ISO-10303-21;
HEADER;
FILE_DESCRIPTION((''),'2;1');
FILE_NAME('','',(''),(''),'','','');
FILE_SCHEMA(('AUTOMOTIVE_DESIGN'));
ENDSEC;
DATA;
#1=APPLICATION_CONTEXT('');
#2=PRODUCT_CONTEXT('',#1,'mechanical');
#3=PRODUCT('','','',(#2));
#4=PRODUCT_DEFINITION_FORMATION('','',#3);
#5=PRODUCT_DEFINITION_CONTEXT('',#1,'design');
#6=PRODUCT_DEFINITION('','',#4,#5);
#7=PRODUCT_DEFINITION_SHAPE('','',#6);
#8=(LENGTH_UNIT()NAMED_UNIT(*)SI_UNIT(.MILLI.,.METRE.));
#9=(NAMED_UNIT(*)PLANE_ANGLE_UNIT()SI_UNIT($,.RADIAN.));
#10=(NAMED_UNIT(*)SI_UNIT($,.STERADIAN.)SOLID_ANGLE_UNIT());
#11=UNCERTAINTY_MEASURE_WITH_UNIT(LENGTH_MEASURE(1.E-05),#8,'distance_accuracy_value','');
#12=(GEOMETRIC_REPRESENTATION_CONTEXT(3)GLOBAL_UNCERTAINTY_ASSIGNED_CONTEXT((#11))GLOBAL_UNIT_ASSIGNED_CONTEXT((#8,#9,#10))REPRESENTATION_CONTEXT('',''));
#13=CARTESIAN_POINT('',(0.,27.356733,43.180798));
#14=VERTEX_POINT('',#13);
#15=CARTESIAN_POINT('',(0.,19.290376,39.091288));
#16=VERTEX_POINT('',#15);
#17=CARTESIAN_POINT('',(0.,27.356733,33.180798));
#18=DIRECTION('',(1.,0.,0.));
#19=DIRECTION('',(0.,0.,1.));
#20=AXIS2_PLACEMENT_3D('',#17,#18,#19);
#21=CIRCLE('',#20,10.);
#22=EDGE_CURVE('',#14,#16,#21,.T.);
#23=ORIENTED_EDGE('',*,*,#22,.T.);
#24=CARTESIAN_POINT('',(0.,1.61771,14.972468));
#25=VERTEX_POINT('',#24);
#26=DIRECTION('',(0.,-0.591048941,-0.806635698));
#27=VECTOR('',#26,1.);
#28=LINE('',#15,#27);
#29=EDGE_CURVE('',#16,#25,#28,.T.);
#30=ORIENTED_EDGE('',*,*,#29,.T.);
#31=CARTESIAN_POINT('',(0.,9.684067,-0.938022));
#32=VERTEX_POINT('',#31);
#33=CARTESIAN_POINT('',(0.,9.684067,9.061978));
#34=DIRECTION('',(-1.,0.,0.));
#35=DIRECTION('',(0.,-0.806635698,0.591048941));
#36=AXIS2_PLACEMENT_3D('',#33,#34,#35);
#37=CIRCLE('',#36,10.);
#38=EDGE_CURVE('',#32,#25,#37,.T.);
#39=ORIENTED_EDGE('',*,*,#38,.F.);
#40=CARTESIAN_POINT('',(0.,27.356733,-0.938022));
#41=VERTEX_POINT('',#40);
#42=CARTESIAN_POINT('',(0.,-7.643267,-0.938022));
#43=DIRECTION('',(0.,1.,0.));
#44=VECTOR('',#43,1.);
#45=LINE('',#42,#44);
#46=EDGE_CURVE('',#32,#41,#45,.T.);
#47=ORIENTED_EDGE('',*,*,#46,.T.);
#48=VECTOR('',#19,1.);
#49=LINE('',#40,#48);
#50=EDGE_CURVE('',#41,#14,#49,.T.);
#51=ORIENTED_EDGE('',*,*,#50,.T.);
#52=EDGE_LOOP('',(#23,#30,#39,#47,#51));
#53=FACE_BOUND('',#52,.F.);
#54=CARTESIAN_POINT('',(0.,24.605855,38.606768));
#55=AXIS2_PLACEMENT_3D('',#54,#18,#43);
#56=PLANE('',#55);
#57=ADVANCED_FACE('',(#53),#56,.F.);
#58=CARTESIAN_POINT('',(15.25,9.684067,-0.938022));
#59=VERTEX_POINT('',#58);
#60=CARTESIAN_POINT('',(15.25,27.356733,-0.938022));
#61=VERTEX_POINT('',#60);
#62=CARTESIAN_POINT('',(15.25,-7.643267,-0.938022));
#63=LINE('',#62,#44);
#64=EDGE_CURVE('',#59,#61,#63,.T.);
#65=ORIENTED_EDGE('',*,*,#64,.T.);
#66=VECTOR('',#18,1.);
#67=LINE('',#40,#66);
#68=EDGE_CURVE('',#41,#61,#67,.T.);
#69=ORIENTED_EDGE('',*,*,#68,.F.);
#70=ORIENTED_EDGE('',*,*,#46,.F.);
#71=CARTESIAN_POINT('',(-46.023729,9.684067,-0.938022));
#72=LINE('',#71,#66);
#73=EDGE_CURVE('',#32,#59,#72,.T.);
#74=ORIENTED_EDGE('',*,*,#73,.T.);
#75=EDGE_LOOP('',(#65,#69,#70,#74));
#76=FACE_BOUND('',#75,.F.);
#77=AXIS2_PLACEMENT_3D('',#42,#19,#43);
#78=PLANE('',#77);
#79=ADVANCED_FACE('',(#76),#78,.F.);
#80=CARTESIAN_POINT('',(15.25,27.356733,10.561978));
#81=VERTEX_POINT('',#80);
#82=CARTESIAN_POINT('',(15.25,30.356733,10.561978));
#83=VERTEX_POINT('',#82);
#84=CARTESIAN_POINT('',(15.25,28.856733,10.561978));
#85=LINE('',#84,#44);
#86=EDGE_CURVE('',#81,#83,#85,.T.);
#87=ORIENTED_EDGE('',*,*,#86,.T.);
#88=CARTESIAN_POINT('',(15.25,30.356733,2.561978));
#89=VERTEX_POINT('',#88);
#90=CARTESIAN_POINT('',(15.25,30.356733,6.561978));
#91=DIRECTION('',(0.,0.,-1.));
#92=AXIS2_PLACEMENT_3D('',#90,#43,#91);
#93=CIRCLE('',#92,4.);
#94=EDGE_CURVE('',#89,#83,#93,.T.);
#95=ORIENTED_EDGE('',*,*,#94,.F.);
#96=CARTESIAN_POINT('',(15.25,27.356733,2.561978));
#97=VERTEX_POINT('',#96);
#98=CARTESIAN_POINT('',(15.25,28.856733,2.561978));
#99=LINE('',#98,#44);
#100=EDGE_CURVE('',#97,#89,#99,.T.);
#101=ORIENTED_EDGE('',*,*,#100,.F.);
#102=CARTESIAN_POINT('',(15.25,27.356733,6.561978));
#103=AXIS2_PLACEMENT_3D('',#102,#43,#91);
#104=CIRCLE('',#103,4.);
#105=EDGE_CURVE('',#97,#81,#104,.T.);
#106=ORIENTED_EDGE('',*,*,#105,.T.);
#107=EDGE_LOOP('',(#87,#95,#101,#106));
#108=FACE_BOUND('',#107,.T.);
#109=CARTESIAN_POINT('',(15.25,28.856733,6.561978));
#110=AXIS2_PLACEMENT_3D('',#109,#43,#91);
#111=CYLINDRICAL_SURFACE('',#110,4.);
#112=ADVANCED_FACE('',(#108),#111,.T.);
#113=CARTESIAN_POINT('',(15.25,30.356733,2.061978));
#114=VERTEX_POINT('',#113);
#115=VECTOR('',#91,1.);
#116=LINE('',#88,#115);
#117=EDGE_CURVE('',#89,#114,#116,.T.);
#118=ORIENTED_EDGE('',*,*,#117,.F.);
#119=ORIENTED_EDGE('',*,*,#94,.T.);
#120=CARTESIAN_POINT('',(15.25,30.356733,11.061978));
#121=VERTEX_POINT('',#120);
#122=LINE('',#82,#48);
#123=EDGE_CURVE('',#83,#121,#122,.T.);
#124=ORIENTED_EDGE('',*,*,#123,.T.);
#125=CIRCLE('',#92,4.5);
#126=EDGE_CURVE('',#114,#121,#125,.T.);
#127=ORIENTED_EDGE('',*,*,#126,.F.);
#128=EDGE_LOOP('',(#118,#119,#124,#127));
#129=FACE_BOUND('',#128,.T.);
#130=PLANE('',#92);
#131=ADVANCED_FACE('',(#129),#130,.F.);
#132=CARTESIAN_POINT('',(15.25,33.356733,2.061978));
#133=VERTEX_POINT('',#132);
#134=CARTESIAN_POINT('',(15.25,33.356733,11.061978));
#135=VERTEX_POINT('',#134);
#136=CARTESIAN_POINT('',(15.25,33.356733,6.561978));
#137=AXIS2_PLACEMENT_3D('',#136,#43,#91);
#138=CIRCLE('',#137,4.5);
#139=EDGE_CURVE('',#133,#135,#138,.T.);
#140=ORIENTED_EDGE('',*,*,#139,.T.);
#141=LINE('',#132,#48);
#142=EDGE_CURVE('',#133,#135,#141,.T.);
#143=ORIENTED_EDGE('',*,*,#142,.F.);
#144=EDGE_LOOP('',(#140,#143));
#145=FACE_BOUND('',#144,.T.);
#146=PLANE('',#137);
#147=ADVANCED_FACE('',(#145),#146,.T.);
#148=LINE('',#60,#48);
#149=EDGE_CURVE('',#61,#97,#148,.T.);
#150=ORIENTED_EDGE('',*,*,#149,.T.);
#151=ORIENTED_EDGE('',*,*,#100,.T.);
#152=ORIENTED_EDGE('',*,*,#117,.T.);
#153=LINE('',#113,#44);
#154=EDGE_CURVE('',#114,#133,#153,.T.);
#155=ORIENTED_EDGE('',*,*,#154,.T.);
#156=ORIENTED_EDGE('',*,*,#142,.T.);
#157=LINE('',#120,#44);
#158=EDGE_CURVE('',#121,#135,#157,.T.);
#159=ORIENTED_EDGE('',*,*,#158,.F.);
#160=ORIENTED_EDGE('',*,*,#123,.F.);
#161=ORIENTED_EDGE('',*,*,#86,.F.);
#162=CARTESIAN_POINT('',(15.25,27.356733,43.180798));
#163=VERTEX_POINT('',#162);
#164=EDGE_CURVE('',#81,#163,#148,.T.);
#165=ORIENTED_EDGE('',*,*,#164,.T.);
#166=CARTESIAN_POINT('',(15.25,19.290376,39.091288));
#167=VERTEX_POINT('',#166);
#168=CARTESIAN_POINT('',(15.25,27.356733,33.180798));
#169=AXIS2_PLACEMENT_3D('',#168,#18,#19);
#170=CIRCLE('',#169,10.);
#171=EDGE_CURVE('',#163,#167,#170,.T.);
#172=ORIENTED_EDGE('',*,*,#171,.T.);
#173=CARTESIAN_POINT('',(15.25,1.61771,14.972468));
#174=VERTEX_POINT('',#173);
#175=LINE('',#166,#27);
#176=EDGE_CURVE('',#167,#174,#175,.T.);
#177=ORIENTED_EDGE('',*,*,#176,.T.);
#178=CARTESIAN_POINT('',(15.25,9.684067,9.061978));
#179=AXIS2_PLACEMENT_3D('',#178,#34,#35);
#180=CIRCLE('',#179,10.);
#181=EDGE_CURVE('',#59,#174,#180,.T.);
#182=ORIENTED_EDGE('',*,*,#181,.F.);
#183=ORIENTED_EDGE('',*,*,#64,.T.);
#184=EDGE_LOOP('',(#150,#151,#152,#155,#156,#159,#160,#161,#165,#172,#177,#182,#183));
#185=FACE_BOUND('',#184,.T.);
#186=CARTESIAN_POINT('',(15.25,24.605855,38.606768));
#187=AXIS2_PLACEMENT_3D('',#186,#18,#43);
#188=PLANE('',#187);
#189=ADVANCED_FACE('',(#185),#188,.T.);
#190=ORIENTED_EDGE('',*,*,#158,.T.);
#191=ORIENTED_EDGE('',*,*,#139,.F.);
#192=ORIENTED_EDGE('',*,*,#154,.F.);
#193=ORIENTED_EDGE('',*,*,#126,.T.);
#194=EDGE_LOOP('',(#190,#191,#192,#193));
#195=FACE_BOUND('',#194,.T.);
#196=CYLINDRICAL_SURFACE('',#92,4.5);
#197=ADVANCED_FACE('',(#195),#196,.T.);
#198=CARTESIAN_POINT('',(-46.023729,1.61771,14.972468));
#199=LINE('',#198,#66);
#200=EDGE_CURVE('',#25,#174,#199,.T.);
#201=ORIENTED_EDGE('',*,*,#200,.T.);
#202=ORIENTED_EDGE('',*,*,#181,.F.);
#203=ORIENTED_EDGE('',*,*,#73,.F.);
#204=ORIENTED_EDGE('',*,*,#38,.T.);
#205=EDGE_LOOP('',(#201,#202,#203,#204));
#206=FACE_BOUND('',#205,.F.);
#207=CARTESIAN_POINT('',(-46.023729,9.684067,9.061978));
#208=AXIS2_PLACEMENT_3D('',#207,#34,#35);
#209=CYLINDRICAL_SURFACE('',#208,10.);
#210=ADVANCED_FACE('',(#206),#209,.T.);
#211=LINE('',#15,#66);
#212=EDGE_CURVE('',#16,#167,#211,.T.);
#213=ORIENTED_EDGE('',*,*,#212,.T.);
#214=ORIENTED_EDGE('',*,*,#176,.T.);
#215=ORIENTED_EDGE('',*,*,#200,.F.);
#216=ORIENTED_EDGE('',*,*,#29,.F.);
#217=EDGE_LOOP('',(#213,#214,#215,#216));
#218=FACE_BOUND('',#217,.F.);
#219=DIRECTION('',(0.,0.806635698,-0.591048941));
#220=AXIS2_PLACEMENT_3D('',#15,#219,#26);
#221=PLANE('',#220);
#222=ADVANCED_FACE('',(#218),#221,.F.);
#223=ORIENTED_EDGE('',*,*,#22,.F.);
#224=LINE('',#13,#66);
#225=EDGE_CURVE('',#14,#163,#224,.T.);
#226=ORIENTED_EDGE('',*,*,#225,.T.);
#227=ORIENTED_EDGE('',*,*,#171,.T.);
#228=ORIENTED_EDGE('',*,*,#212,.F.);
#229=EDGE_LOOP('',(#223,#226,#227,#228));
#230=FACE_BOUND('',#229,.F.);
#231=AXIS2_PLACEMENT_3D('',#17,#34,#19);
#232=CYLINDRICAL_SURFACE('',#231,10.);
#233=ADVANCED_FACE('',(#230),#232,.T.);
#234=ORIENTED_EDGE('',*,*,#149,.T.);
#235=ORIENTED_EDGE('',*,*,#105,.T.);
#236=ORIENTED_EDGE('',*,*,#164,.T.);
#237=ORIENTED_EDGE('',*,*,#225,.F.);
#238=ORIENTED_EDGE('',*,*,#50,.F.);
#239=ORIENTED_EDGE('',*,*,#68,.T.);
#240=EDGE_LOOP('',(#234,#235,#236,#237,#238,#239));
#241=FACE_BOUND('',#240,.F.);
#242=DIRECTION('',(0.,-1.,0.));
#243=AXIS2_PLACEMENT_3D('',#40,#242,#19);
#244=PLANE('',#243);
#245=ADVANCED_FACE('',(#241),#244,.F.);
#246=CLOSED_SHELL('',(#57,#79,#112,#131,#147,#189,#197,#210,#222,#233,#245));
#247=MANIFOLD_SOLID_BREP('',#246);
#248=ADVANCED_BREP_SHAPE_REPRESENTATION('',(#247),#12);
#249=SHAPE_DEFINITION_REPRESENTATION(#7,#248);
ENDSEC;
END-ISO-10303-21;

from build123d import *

# Parameters (mm, degrees)
F1_DEPTH    = 15.25
F2_T1_DEPTH = 107.2974570989
F3_W        = 3
F3_H        = 4
F4_ANGLE    = 180


# Not quite as in the source:
# - a fillet or chamfer that OpenCascade refuses, or shapes differently, is made with other operations: its cross-section is extruded or revolved along the edge and cut away or added


with BuildPart() as f1:
    # F0 (on Right) → F1 (new body)
    with BuildSketch(Plane.YZ):
        with BuildLine():
            Line((27.3567325823, 33.1807983013), (27.3567325823, 43.1807983013))
            ThreePointArc((27.3567325823, 43.1807983013), (22.8348355324, 42.1000161521), (19.2903756049, 39.0912877154))
            Line((19.2903756049, 39.0912877154), (27.3567325823, 33.1807983013))
        make_face()
        with BuildLine():
            Line((27.3567325823, 23.1807983013), (27.3567325823, 33.1807983013))
            Line((27.3567325823, 33.1807983013), (21.4462431681, 25.1144413239))
            ThreePointArc((21.4462431681, 25.1144413239), (24.2473572248, 23.6764948083), (27.3567325823, 23.1807983013))
        make_face()
        with BuildLine():
            Line((21.4462431681, 25.1144413239), (27.3567325823, 33.1807983013))
            Line((27.3567325823, 33.1807983013), (19.2903756049, 39.0912877154))
            ThreePointArc((19.2903756049, 39.0912877154), (17.4736097193, 31.656369728), (21.4462431681, 25.1144413239))
        make_face()
        with BuildLine():
            ThreePointArc((21.4462431681, 25.1144413239), (17.4736097193, 31.656369728), (19.2903756049, 39.0912877154))
            Line((19.2903756049, 39.0912877154), (-5.7096243951, 4.9724677154))
            ThreePointArc((-5.7096243951, 4.9724677154), (0.832304009, 8.9451011642), (8.2672219964, 7.1283352786))
            Line((8.2672219964, 7.1283352786), (21.4462431681, 25.1144413239))
        make_face()
        with BuildLine():
            ThreePointArc((-5.7096243951, 4.9724677154), (-7.1475709107, 2.1713536587), (-7.6432674177, -0.9380216987))
            Line((-7.6432674177, -0.9380216987), (2.3567325823, -0.9380216987))
            Line((2.3567325823, -0.9380216987), (-5.7096243951, 4.9724677154))
        make_face()
        with BuildLine():
            Line((27.3567325823, -0.9380216987), (27.3567325823, 23.1807983013))
            ThreePointArc((27.3567325823, 23.1807983013), (24.2473572248, 23.6764948083), (21.4462431681, 25.1144413239))
            Line((21.4462431681, 25.1144413239), (8.2672219964, 7.1283352786))
            ThreePointArc((8.2672219964, 7.1283352786), (11.2759504331, 3.5838753511), (12.3567325823, -0.9380216987))
            Line((12.3567325823, -0.9380216987), (27.3567325823, -0.9380216987))
        make_face()
        with BuildLine():
            ThreePointArc((8.2672219964, 7.1283352786), (0.832304009, 8.9451011642), (-5.7096243951, 4.9724677154))
            Line((-5.7096243951, 4.9724677154), (2.3567325823, -0.9380216987))
            Line((2.3567325823, -0.9380216987), (8.2672219964, 7.1283352786))
        make_face()
        with BuildLine():
            Line((8.2672219964, 7.1283352786), (2.3567325823, -0.9380216987))
            Line((2.3567325823, -0.9380216987), (12.3567325823, -0.9380216987))
            ThreePointArc((12.3567325823, -0.9380216987), (11.2759504331, 3.5838753511), (8.2672219964, 7.1283352786))
        make_face()
    extrude(amount=F1_DEPTH)

    # F2: fillet of radius 10 on 1 edges, made by hand

    # F2_s2 → F2_t1 (cut)
    with BuildSketch(Plane.YZ.offset(-46.0237285495)):
        with BuildLine():
            ThreePointArc((1.6177099031, 14.9724677154), (0.7648490296, 4.5400812514), (9.6840668804, -0.9380216987))
            Line((9.6840668804, -0.9380216987), (9.6840668804, -1.9380216987))
            Line((9.6840668804, -1.9380216987), (-7.6432674177, -1.9380216987))
            Line((-7.6432674177, -1.9380216987), (-8.6432674177, -0.9380216987))
            ThreePointArc((-8.6432674177, -0.9380216987), (-6.5162600928, 5.5635166568), (0.8110742054, 15.5635166568))
            Line((0.8110742054, 15.5635166568), (1.6177099031, 14.9724677154))
        make_face()
    extrude(amount=F2_T1_DEPTH, mode=Mode.SUBTRACT)

    # F3 (on face) → F4 (revolve)
    with BuildSketch(Plane.YZ.offset(15.25)):
        with Locations((28.8567325823, 4.5619783013)):
            Rectangle(F3_W, F3_H)
        Polygon((33.3567325823, 6.5619783013), (30.3567325823, 6.5619783013), (30.3567325823, 2.5619783013), (30.3567325823, 2.0619783013), (33.3567325823, 2.0619783013), align=None)
    revolve(axis=Axis((15.25, 28.8567325823, 6.5619783013), (0, 1, 0)), revolution_arc=F4_ANGLE)


solid = f1.part
